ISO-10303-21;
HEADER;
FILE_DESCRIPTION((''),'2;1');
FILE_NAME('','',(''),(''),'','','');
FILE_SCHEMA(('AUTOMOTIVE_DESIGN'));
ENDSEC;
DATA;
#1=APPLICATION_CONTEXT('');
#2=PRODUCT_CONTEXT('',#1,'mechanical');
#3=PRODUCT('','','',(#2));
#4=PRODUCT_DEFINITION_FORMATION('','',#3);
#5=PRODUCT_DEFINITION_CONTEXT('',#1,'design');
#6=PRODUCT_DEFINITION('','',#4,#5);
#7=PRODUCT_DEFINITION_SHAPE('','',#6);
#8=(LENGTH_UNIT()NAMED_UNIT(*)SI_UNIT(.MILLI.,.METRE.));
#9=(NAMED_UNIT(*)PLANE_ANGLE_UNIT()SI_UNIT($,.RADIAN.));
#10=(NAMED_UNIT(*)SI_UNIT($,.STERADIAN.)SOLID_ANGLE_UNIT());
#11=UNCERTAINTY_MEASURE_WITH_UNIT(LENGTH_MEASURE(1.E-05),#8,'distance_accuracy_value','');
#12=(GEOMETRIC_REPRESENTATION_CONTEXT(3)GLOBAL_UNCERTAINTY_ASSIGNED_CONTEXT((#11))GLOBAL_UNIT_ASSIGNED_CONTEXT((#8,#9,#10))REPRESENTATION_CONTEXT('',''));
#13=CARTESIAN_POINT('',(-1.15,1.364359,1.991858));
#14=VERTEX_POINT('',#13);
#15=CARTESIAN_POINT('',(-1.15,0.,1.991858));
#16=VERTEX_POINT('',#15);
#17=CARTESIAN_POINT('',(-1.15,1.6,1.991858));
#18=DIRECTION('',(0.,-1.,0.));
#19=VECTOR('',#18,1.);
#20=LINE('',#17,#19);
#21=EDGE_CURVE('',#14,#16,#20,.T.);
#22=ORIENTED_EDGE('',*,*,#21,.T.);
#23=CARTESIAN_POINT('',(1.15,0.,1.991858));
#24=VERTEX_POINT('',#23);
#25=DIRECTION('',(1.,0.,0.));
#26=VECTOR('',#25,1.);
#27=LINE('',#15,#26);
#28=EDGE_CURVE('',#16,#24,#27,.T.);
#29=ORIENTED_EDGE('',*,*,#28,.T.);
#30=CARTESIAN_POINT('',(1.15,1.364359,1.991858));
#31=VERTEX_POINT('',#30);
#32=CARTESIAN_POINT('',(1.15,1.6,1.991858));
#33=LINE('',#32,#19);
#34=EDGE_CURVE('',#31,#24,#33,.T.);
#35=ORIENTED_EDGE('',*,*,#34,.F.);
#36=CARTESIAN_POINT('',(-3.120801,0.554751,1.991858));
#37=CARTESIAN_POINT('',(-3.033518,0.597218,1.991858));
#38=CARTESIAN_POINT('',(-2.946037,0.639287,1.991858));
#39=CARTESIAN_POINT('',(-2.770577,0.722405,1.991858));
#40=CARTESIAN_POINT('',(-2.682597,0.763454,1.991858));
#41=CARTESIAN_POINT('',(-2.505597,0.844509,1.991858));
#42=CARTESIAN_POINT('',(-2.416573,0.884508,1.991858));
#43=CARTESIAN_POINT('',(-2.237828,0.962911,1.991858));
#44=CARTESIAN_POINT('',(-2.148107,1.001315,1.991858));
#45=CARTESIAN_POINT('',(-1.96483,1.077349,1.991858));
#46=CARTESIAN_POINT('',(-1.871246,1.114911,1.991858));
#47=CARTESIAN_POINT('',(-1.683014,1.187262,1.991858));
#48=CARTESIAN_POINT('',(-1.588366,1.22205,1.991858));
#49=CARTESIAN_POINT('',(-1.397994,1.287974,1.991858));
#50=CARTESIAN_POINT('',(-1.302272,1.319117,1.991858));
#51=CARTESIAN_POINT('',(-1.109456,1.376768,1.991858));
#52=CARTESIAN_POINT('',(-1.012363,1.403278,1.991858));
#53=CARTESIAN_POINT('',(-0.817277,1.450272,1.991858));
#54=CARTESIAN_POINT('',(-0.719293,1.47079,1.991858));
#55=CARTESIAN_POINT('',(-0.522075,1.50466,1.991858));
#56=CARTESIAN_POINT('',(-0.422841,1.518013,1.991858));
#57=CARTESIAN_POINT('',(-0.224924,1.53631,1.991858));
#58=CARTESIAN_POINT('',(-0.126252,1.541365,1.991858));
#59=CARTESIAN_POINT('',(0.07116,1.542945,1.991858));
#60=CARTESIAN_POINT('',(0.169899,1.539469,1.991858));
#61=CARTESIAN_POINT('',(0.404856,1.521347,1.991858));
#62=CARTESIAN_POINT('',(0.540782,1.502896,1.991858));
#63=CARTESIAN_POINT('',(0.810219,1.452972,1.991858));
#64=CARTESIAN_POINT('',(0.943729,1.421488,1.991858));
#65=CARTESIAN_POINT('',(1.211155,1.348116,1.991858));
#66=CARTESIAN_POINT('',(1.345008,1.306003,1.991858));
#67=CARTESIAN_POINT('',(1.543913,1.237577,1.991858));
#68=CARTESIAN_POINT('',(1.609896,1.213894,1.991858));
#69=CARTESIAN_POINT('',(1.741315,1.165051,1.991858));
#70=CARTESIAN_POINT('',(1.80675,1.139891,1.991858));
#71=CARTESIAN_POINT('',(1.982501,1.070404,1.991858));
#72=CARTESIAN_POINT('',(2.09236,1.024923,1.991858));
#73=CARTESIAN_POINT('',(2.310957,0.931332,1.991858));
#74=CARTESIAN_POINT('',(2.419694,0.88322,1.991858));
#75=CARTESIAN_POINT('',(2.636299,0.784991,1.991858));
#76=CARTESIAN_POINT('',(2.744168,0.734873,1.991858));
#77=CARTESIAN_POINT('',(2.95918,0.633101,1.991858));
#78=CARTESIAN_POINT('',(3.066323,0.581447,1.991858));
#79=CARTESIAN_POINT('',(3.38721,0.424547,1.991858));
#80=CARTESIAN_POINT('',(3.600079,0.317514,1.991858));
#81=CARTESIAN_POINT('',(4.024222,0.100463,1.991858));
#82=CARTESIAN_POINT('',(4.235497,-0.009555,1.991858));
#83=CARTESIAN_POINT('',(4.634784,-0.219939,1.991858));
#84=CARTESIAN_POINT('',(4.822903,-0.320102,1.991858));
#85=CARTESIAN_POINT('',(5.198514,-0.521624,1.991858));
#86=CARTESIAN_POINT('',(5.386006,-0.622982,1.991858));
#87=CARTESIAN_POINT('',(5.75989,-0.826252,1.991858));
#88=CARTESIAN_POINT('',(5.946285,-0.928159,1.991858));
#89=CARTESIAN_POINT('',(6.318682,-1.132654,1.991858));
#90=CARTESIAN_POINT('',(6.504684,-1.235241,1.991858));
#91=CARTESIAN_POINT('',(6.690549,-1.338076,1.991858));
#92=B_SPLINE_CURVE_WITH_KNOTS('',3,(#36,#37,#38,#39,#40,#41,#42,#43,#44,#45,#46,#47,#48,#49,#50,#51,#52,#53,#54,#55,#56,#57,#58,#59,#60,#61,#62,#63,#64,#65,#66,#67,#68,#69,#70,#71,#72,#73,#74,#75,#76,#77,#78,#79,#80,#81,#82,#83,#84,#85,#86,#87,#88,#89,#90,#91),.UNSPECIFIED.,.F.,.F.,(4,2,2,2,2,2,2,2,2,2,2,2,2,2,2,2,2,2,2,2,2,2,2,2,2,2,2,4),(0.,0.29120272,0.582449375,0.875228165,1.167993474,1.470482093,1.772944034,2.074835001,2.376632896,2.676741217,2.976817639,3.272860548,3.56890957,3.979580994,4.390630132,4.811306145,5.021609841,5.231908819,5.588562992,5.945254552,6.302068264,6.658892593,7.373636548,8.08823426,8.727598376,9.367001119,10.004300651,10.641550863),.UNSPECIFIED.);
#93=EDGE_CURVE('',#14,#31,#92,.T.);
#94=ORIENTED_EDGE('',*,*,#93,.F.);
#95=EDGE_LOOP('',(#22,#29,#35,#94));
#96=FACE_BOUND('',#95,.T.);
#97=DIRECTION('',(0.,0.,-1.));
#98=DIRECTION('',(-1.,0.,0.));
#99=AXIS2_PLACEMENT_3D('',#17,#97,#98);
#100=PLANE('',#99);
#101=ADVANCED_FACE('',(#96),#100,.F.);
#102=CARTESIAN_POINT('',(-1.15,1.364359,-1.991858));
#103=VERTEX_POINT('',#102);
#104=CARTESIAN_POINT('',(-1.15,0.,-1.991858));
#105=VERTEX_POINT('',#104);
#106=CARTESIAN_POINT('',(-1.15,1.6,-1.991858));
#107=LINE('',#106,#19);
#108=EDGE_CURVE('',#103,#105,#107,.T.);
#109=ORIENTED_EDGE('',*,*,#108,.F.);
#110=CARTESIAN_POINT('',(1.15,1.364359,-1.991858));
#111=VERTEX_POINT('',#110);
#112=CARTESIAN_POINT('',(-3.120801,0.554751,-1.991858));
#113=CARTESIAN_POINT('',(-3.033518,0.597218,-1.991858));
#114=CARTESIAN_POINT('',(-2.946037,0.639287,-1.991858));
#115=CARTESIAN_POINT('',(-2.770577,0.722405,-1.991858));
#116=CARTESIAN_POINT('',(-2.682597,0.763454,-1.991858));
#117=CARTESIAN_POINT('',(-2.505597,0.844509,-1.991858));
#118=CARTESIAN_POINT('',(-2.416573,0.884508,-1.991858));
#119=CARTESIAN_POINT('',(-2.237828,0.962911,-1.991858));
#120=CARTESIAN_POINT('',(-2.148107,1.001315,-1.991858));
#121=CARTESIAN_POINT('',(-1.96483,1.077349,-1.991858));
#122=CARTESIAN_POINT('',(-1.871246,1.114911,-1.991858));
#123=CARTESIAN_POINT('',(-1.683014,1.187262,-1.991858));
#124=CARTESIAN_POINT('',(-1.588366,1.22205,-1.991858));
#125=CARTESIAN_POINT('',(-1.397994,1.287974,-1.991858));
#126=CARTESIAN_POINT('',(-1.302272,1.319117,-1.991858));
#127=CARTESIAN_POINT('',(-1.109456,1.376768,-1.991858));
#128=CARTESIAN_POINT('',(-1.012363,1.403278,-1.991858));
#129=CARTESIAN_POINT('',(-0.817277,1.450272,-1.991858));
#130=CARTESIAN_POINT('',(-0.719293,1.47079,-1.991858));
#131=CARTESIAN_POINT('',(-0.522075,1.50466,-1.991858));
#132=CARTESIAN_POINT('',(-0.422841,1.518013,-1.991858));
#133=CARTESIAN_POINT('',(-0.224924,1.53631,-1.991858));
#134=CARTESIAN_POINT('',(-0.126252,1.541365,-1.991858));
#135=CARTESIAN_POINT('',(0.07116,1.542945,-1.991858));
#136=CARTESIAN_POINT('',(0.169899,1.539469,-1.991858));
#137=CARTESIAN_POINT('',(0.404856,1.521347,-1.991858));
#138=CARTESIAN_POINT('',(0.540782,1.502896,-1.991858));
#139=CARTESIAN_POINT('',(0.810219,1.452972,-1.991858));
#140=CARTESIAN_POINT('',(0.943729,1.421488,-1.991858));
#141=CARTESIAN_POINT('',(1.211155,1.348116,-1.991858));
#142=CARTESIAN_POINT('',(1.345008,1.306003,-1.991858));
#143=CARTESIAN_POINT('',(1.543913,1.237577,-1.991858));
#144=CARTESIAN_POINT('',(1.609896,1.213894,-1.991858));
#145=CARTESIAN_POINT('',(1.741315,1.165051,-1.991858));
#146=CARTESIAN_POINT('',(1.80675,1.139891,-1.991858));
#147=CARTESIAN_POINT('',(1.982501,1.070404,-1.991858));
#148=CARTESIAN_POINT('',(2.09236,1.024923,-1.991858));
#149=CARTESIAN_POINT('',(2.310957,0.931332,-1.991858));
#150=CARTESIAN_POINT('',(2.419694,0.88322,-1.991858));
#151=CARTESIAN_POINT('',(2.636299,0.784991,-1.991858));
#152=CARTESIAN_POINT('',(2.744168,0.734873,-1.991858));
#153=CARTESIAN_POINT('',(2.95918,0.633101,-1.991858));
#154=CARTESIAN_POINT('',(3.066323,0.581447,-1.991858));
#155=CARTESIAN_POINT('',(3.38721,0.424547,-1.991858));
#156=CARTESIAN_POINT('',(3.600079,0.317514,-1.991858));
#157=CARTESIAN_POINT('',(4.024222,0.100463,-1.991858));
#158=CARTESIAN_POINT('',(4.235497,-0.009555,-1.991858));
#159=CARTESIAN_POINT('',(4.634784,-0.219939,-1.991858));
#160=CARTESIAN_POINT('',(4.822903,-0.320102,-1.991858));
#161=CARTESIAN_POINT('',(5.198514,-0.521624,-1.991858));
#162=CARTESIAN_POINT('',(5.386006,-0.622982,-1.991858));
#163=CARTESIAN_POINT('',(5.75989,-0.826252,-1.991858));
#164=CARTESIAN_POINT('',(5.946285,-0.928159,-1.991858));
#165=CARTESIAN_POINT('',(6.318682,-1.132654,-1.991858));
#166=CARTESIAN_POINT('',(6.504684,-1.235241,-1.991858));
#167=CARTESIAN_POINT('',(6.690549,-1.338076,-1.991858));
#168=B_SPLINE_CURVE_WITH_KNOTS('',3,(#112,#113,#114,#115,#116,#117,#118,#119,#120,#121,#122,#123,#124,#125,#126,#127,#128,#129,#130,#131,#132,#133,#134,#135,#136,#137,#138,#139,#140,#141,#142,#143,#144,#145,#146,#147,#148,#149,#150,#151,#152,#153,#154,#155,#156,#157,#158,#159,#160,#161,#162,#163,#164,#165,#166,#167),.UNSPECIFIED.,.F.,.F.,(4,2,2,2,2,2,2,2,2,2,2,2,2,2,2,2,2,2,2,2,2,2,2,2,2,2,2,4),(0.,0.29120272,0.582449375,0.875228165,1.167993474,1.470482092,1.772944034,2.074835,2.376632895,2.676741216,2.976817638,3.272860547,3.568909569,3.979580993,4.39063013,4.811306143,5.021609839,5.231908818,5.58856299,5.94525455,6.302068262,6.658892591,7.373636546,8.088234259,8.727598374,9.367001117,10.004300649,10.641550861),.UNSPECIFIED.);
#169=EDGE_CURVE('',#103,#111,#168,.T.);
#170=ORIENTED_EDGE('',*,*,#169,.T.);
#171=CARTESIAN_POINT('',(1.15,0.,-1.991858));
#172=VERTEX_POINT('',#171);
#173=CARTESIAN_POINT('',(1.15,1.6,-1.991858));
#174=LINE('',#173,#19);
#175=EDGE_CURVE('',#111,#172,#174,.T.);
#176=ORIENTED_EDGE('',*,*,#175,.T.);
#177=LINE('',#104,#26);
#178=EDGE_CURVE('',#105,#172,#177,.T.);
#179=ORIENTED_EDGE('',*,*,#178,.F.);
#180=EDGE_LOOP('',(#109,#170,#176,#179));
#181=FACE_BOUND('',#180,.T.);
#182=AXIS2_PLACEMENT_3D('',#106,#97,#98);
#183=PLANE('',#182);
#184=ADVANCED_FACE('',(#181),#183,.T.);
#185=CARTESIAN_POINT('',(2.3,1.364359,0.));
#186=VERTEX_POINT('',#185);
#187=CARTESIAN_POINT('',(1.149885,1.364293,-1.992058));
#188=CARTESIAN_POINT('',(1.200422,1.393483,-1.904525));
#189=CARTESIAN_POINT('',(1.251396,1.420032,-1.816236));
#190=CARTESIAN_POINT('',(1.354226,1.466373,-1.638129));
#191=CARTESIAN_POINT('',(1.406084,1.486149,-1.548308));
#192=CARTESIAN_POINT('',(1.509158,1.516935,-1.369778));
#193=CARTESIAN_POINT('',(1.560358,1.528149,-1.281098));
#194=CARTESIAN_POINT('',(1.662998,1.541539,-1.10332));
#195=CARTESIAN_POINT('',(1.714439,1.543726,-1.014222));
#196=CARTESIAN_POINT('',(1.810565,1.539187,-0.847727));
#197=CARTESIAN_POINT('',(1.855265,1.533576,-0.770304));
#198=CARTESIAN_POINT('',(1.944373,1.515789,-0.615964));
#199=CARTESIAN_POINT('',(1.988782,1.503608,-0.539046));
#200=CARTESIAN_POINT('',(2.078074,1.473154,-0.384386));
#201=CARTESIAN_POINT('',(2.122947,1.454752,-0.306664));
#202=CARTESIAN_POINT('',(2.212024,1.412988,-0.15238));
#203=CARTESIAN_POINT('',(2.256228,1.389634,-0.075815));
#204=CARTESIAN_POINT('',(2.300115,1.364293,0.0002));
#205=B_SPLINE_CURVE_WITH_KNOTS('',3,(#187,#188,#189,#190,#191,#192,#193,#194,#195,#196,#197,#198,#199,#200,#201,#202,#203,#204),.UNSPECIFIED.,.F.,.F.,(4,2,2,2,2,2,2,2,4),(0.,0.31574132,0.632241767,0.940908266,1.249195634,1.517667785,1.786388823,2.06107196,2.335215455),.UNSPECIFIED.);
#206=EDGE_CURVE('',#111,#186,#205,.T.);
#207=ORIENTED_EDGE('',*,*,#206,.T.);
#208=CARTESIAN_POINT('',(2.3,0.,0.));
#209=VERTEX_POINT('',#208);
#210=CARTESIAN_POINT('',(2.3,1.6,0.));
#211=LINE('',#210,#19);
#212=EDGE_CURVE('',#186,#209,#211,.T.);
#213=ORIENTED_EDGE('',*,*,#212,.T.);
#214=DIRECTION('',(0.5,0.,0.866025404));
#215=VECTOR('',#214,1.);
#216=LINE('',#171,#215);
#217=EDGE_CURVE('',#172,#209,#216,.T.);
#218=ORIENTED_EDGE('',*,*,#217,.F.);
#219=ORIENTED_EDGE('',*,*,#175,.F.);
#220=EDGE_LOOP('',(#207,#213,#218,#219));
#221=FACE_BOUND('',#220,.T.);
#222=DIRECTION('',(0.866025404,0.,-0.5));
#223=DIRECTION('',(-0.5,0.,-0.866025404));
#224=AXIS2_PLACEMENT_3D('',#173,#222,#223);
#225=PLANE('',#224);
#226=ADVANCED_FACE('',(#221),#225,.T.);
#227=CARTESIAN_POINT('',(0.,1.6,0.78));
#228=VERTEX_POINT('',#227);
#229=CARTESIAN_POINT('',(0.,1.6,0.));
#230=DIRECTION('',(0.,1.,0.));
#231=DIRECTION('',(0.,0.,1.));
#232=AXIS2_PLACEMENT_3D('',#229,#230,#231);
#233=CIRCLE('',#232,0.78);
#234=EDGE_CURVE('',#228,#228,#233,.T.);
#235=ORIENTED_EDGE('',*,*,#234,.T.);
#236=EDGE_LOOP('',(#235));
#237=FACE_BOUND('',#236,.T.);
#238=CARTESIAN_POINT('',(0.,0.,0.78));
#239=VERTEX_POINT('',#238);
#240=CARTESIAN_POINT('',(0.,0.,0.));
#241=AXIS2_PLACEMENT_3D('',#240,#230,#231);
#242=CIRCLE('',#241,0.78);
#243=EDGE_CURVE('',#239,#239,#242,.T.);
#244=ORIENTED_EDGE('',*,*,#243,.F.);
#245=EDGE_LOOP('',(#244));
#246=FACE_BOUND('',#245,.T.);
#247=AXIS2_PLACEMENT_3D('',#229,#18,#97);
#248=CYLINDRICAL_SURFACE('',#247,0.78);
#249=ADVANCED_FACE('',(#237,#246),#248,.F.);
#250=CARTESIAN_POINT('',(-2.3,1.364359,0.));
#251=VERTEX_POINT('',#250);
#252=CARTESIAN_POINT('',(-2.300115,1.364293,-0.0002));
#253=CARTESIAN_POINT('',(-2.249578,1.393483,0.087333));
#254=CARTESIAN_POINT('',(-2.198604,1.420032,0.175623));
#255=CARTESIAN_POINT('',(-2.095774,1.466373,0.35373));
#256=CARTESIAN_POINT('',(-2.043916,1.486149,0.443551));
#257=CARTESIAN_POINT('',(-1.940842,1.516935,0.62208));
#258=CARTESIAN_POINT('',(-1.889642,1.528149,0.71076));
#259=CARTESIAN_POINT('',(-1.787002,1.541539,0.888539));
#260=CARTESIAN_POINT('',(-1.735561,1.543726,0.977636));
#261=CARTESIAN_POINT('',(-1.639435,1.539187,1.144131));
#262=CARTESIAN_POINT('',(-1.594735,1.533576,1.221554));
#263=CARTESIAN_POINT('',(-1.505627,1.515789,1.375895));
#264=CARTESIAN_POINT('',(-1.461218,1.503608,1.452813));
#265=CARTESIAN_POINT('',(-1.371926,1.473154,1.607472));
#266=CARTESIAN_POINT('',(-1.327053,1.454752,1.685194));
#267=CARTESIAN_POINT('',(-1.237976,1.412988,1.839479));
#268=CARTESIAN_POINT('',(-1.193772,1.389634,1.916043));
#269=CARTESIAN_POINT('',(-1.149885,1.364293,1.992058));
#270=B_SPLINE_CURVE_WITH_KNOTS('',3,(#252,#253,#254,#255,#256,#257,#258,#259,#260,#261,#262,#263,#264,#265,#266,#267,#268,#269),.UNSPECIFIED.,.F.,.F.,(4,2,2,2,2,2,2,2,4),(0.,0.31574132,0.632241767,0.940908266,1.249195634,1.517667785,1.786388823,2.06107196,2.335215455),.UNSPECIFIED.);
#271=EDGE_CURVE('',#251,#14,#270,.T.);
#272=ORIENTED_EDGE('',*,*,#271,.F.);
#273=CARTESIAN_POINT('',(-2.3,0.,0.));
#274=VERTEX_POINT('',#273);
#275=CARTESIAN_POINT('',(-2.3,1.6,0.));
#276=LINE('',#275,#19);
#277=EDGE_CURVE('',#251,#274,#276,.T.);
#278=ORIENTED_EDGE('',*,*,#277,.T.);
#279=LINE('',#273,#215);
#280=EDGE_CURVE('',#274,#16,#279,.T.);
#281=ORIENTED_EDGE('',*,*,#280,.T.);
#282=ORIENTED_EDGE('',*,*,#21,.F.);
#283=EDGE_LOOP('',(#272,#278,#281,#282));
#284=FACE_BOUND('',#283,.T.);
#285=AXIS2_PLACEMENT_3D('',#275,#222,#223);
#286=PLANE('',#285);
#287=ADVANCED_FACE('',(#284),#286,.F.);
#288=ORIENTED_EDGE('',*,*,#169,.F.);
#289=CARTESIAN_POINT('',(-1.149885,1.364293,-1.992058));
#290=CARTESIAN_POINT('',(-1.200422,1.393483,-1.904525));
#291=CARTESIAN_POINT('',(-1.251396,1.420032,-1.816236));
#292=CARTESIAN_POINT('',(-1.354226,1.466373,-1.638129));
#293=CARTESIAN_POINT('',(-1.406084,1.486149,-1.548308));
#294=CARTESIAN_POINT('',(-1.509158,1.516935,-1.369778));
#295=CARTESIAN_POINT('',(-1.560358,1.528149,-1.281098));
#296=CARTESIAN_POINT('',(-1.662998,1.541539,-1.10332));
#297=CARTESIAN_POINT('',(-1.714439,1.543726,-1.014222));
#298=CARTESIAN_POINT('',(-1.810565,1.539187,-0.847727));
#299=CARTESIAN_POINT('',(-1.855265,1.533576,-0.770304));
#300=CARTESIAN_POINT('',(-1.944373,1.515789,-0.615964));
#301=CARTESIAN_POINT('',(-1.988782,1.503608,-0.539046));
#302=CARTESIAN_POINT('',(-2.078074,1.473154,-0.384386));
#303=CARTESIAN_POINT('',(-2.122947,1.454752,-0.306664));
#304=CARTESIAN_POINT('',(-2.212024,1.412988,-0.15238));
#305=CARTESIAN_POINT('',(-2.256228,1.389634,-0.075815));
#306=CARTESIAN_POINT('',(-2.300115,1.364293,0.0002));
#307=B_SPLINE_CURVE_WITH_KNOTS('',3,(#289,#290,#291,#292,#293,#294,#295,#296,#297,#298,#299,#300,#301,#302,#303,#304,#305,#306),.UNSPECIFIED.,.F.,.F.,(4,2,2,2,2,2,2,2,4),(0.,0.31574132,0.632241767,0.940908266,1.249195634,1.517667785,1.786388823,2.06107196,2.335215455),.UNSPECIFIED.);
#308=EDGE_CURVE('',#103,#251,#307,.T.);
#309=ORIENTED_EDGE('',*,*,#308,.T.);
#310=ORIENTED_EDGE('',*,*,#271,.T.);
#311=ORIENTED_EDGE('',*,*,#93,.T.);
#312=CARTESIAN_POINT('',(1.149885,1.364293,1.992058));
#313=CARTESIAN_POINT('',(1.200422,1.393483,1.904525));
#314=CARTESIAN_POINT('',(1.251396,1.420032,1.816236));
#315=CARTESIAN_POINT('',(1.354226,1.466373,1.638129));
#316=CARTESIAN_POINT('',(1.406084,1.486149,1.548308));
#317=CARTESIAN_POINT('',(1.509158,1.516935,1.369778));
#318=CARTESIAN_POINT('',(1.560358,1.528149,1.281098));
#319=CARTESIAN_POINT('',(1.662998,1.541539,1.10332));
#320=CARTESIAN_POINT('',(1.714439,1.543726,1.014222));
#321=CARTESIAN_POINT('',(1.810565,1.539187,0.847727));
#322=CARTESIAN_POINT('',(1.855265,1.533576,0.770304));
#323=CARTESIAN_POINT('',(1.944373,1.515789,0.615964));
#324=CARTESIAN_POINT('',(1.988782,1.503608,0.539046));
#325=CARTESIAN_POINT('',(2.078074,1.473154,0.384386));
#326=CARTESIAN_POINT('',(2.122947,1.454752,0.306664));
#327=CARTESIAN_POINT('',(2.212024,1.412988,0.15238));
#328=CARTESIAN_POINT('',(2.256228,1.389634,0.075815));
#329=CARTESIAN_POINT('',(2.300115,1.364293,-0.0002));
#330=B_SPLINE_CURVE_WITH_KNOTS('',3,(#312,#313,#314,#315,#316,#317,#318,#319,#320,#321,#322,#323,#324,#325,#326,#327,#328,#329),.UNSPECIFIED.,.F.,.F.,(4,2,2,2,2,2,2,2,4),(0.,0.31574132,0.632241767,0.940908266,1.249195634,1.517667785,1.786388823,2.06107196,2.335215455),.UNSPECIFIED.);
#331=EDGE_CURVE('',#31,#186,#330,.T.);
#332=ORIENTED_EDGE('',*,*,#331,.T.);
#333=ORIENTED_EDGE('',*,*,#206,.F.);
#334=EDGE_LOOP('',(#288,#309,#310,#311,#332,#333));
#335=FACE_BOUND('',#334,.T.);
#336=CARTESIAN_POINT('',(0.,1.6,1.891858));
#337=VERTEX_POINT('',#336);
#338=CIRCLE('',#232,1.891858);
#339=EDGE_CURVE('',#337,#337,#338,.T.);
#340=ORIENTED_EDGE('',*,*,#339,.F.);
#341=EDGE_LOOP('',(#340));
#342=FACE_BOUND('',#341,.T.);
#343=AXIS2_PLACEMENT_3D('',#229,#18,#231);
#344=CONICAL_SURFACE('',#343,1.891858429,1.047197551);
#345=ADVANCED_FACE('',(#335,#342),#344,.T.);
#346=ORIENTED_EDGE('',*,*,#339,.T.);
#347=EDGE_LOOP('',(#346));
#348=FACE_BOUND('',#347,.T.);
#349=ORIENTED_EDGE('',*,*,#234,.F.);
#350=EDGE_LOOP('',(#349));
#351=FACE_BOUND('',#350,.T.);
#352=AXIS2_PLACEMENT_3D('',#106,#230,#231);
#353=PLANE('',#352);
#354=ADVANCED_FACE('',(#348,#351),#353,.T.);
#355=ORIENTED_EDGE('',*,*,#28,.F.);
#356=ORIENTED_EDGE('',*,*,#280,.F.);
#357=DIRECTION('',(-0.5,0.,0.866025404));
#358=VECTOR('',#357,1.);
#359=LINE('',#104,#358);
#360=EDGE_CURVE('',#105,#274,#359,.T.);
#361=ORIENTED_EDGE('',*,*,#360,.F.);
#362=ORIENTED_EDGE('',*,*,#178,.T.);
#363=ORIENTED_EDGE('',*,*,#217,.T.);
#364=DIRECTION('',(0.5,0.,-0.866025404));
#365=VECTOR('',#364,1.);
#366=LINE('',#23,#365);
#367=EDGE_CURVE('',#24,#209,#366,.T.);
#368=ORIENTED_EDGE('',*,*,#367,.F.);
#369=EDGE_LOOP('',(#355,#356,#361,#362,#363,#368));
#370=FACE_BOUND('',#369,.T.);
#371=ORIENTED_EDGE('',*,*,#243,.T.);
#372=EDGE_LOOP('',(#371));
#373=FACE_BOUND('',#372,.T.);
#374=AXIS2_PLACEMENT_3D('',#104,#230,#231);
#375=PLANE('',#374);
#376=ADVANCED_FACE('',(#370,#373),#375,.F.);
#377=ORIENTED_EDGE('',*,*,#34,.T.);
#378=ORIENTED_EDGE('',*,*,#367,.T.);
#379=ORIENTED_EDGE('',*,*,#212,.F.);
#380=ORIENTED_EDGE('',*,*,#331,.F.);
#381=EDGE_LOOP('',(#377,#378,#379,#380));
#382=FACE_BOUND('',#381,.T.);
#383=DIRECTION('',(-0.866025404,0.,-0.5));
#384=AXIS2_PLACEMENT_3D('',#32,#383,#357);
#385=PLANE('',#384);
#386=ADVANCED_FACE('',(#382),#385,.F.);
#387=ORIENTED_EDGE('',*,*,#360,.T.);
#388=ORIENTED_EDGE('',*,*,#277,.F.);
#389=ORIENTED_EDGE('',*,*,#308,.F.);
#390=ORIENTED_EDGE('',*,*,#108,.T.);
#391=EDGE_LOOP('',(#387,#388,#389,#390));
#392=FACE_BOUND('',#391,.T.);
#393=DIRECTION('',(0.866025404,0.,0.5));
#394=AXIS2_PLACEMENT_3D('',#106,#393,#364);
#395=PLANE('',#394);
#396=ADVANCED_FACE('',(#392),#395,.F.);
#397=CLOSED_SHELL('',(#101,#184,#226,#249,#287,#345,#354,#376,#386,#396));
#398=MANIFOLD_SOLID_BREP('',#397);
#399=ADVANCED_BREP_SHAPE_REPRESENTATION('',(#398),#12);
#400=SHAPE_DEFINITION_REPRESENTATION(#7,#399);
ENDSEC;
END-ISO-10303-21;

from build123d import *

# Parameters (mm, degrees)
SKETCH1_R          = 0.78
BASE_EXTRUDE_DEPTH = 1.6


# Read off the part's stored shape, not the designer's step: Cut-Extrude1
with BuildPart() as part:
    # Sketch1 → Base-Extrude (new body)
    with BuildSketch(Plane(origin=(0, 0, 0), x_dir=(1, 0, 0), z_dir=(0, 1, 0))):
        Polygon((-1.15, 1.991858429), (1.15, 1.991858429), (2.3, 0), (1.15, -1.991858429), (-1.15, -1.991858429), (-2.3, 0), align=None)
        with Locations(Location((0, 0, 0), (0, 0, 270))):
            Circle(SKETCH1_R, mode=Mode.SUBTRACT)
    extrude(amount=BASE_EXTRUDE_DEPTH)

    # Cut-Extrude1 outline → Cut-Extrude1 (revolve, cut)
    with BuildSketch(Plane.XY):
        Polygon((2.3, 1.6), (1.891858429, 1.6), (2.3, 1.364359354), align=None)
    revolve(axis=Axis((0, 0, 0), (0, 1, 0)), mode=Mode.SUBTRACT)


solid = part.part
